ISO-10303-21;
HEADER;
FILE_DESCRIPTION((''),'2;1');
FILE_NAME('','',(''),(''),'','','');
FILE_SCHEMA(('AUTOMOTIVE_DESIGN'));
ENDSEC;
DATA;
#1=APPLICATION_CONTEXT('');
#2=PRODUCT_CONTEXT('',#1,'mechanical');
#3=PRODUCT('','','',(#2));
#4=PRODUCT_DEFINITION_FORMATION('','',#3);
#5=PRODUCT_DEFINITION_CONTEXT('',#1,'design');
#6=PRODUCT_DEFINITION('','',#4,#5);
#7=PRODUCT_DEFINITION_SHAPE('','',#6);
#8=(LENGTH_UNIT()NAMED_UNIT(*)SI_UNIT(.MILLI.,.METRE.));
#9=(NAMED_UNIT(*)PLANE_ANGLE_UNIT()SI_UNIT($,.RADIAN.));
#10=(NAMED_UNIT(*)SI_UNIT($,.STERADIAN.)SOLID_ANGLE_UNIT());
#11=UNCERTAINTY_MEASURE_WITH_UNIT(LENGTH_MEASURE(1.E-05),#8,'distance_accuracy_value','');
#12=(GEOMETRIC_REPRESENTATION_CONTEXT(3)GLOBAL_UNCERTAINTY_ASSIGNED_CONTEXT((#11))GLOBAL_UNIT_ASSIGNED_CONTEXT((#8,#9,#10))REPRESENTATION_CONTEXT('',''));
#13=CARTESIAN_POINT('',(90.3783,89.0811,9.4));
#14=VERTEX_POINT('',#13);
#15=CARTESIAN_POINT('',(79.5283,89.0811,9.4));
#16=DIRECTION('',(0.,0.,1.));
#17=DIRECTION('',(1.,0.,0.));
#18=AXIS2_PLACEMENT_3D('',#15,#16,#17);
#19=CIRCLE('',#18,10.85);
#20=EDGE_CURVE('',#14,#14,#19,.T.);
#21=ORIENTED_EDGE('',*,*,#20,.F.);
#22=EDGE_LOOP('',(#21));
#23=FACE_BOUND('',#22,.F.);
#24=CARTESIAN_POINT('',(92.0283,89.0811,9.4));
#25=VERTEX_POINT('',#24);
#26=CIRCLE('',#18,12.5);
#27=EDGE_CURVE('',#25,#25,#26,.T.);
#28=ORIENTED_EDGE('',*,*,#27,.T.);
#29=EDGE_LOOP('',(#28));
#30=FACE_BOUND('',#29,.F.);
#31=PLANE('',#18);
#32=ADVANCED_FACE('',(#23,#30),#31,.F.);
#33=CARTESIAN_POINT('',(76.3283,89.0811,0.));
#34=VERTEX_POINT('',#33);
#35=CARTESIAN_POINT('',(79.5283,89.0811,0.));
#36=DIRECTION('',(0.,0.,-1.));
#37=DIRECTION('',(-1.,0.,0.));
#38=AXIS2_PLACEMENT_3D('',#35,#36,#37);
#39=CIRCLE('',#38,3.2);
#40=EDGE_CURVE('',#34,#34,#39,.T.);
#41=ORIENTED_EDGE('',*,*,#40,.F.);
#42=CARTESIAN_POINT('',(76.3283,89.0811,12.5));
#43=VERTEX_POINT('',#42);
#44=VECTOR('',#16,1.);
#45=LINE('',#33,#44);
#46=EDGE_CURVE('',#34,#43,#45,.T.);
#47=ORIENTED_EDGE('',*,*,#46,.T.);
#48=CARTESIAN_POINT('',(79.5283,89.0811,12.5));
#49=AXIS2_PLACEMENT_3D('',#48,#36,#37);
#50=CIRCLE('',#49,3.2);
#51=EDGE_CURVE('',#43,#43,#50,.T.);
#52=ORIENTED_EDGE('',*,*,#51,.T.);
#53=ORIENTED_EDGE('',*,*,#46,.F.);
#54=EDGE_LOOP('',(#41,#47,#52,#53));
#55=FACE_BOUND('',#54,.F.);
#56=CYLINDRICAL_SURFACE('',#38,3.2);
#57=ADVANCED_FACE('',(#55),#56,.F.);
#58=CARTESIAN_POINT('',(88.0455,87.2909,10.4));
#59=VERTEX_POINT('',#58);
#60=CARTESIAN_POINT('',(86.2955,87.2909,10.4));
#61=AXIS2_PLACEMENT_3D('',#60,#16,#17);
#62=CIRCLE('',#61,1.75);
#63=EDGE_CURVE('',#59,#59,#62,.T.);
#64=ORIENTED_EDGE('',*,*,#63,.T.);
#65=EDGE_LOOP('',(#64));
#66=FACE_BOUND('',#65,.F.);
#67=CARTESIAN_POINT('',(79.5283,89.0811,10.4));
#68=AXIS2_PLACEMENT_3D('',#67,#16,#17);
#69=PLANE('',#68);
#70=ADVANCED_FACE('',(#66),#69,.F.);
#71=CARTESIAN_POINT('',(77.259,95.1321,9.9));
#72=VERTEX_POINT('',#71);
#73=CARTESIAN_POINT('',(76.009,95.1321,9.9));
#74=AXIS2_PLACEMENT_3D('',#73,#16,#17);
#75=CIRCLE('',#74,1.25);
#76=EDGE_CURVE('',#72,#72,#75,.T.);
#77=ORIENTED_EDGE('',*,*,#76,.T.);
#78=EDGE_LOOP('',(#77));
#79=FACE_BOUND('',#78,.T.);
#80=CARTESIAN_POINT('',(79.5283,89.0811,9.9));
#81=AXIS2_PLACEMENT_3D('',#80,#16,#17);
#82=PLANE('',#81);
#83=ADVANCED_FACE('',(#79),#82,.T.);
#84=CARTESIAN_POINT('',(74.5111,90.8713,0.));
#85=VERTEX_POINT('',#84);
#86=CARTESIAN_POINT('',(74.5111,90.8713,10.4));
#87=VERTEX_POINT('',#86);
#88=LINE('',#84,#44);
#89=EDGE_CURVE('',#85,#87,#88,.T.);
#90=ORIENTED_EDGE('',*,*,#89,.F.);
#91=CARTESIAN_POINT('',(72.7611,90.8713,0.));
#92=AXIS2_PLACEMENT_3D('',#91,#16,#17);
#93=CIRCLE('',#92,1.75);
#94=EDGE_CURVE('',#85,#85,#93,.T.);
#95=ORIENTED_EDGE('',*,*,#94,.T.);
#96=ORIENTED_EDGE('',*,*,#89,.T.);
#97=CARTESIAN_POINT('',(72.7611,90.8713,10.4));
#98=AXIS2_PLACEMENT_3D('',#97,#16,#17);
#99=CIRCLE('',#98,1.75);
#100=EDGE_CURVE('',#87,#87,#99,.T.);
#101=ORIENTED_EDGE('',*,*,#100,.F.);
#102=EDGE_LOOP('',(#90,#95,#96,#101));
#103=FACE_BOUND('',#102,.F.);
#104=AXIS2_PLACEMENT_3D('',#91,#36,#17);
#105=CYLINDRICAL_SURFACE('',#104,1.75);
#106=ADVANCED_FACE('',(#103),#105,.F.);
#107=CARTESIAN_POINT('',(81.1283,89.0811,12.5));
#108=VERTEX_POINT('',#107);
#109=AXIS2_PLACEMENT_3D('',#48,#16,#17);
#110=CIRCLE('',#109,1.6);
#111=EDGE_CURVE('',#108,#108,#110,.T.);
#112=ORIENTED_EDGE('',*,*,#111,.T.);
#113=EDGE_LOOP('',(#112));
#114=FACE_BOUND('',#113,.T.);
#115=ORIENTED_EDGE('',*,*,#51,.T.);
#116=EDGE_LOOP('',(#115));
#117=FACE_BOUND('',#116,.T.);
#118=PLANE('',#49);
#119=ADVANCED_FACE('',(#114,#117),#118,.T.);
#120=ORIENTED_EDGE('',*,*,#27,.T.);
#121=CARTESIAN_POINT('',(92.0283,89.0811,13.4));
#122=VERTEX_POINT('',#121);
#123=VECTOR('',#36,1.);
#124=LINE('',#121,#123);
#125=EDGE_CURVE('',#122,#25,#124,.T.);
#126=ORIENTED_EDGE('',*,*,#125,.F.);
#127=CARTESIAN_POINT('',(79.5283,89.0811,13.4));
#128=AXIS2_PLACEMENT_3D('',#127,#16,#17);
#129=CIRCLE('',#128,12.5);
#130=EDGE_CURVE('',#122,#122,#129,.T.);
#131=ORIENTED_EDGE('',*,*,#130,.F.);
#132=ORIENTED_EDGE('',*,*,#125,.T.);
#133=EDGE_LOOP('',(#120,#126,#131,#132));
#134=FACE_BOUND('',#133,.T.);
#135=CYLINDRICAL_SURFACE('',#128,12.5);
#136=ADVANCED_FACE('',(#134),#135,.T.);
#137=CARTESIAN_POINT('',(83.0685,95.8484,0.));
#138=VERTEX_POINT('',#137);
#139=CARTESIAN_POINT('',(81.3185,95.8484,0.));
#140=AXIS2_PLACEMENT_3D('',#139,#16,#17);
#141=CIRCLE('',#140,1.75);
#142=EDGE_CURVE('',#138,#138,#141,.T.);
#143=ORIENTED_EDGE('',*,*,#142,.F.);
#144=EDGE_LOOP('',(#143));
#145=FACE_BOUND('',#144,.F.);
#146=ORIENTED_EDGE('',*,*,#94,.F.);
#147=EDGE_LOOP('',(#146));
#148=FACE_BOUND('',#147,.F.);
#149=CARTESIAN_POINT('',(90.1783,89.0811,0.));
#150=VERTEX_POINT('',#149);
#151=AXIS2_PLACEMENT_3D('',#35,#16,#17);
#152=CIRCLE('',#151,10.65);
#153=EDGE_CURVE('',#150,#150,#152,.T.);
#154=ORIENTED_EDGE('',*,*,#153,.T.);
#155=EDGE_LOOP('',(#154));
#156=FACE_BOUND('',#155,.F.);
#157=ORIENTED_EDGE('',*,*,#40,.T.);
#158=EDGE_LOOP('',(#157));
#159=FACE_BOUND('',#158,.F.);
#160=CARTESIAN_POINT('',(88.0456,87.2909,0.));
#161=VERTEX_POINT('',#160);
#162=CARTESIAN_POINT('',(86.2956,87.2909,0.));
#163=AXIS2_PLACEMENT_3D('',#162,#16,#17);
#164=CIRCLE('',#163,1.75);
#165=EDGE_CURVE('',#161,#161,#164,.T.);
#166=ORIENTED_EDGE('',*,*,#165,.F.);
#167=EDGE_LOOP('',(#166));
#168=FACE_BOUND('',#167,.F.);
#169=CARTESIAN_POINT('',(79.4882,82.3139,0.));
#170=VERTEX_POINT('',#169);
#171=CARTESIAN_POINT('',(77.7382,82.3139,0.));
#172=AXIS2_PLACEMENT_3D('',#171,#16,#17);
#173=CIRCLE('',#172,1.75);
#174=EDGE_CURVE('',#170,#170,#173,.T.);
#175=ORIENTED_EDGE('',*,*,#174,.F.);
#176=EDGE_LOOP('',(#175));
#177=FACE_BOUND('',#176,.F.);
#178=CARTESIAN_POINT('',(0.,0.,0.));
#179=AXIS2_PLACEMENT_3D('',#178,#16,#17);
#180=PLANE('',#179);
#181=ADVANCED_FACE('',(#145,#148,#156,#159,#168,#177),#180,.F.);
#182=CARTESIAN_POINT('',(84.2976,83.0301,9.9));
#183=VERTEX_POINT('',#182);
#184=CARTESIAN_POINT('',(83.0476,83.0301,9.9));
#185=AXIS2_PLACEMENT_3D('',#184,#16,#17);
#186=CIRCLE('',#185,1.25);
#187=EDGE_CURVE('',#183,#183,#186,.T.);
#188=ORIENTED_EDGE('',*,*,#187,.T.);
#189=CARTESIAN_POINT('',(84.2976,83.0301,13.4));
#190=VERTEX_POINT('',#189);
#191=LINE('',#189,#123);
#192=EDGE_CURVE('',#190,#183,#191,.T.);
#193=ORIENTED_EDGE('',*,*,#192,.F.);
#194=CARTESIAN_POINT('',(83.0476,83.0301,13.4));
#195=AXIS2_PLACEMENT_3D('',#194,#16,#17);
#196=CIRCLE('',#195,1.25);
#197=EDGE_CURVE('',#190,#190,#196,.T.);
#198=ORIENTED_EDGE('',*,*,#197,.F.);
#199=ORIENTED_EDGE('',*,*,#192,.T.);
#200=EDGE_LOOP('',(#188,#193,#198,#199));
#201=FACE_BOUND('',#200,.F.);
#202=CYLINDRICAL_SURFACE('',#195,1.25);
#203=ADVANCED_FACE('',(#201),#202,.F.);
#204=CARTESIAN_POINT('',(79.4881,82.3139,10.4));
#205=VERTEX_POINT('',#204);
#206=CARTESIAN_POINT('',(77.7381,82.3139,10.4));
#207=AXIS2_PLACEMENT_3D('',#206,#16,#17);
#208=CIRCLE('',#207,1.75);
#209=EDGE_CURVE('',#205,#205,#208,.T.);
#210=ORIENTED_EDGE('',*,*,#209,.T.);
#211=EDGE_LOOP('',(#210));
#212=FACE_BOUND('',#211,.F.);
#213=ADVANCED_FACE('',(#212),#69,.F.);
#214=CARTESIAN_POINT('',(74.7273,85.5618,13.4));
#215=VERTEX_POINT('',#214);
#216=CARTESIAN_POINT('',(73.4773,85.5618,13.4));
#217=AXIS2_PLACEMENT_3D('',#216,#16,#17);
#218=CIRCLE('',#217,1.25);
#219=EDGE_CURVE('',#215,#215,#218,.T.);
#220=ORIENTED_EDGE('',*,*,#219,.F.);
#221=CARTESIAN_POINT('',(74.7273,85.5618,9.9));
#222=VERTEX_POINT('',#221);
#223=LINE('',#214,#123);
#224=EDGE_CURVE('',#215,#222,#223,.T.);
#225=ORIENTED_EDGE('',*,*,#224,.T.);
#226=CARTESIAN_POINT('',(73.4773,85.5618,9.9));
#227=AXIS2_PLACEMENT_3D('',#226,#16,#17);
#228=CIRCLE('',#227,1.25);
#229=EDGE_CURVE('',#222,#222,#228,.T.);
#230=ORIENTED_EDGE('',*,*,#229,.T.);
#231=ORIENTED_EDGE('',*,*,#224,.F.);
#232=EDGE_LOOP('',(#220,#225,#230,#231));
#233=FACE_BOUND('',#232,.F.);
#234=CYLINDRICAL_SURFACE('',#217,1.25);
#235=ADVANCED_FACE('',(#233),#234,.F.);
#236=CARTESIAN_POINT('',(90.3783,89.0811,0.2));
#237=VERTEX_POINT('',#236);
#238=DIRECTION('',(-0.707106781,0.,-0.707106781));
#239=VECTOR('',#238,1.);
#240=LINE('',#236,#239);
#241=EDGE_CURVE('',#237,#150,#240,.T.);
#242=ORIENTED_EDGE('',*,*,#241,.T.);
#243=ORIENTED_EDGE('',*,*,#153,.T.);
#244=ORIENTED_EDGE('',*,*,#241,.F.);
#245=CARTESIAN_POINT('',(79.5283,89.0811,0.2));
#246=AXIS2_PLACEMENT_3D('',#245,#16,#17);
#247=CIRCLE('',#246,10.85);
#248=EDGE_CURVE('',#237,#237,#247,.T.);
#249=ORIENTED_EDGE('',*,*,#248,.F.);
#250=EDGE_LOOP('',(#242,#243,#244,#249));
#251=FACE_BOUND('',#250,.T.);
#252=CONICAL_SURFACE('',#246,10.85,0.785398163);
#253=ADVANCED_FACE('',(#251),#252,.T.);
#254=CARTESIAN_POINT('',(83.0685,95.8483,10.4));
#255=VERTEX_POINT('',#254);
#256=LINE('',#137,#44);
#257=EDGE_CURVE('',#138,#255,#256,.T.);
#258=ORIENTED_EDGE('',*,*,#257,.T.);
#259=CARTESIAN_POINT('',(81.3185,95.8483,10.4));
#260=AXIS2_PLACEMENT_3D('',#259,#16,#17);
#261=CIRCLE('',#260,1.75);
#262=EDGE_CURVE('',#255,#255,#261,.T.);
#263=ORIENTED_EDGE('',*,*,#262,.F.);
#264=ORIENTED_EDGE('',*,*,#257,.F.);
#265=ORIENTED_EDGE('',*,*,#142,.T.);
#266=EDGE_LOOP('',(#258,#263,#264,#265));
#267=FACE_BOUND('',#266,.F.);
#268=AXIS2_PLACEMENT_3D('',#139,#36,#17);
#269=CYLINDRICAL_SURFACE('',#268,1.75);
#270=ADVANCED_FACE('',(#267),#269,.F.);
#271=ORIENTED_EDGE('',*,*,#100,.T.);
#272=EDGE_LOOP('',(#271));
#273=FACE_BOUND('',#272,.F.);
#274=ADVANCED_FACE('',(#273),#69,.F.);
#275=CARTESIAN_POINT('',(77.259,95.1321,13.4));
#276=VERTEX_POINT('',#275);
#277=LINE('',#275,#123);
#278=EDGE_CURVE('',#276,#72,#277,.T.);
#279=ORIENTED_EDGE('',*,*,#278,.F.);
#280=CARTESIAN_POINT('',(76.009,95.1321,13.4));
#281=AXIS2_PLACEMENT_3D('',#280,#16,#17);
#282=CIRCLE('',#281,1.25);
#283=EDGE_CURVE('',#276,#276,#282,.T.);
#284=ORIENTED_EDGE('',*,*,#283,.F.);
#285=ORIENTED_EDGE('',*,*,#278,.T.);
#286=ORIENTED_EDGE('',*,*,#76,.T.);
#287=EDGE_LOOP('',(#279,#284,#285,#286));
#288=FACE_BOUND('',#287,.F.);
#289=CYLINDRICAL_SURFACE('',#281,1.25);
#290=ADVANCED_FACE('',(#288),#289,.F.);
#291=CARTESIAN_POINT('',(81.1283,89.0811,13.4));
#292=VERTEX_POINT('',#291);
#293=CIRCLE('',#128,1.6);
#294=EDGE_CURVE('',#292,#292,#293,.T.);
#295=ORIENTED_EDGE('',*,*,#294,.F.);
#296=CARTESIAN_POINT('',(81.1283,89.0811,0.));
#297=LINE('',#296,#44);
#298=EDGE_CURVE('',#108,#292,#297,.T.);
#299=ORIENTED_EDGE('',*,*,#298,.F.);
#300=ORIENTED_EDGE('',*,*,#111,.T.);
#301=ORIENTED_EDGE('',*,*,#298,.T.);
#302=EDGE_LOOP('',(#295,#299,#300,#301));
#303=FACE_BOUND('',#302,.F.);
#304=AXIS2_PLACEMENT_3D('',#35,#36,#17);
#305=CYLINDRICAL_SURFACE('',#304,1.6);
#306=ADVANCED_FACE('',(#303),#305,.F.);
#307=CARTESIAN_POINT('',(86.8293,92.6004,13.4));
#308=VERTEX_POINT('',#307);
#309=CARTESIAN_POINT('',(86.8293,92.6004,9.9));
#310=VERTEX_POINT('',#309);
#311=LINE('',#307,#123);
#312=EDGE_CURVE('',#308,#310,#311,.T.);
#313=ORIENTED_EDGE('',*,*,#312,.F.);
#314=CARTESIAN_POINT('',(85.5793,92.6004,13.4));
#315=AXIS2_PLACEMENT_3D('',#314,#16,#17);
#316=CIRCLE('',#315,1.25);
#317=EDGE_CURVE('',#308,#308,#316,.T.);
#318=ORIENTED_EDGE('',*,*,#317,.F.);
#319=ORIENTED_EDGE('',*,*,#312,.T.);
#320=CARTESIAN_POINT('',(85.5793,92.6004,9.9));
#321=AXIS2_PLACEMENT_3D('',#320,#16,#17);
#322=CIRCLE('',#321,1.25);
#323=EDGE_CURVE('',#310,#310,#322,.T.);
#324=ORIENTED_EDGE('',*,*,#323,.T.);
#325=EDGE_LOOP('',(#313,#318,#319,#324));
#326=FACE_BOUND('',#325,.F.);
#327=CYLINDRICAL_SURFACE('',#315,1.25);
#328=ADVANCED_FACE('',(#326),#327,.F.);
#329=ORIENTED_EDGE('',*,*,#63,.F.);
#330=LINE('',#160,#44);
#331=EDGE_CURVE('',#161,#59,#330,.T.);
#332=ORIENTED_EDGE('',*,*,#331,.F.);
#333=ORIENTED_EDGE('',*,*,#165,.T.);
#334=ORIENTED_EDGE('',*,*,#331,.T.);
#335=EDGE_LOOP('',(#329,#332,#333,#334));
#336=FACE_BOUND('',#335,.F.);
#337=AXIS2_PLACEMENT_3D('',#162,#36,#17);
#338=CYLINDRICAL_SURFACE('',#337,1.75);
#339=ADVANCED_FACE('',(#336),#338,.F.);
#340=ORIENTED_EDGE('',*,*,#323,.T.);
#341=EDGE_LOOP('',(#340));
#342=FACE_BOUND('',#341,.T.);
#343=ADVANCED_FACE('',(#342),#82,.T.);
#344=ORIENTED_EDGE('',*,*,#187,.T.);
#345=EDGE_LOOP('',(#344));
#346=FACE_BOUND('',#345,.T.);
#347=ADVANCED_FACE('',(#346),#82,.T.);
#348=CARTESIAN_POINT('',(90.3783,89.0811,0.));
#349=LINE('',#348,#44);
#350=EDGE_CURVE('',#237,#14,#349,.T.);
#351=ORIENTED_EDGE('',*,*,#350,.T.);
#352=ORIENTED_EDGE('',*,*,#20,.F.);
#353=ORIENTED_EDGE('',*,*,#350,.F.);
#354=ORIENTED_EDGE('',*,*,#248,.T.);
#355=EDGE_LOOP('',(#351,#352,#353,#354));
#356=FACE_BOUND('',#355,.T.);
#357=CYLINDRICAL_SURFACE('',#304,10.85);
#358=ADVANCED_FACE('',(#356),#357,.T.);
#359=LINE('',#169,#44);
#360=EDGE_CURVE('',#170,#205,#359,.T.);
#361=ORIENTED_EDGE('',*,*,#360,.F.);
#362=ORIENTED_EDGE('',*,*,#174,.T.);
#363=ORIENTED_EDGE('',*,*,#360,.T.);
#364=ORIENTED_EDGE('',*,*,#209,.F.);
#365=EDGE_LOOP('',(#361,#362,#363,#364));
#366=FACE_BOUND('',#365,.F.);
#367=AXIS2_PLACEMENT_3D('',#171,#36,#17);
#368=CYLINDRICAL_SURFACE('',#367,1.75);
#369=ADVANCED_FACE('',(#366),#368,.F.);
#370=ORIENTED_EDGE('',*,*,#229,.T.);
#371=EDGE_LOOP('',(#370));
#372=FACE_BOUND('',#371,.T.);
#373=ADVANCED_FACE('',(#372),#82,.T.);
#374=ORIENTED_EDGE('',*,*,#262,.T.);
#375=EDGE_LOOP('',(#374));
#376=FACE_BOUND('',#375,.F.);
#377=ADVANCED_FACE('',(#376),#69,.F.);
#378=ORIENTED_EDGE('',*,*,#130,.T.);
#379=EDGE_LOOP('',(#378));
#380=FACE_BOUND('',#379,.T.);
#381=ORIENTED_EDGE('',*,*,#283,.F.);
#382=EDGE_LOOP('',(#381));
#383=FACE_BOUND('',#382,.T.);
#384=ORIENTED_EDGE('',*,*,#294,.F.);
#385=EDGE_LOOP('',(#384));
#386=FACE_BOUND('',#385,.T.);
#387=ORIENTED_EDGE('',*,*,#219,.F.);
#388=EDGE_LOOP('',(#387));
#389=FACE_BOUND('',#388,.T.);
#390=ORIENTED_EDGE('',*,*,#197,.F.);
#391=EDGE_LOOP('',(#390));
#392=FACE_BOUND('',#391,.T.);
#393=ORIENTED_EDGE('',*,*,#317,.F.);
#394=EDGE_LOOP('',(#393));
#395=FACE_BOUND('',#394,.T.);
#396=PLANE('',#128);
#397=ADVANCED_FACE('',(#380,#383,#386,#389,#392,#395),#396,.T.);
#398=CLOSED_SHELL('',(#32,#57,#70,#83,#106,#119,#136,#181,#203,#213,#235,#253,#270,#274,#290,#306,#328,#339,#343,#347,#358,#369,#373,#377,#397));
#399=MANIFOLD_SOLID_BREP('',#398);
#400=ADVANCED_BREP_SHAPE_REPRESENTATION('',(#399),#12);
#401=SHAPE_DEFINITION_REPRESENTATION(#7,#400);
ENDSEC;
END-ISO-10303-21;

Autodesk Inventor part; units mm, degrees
ref_plane "YZ Plane" through (0, 0, 0) normal (1, 0, 0) x (0, 1, 0)
ref_plane "XZ Plane" through (0, 0, 0) normal (0, 1, 0) x (-1, 0, 0)
ref_plane "XY Plane" through (0, 0, 0) normal (0, 0, 1) x (1, 0, 0)
sketch "스케치1" plane through (0, 0, 0) normal (0, 0, 1) x (1, 0, 0)
  circle A0 centre (77.7382, 82.3139) radius 1.75 projected
  circle A1 centre (72.7611, 90.8713) radius 1.75 projected
  circle A2 centre (86.2956, 87.2909) radius 1.75 projected
  circle A3 centre (81.3185, 95.8484) radius 1.75 projected
  circle A4 centre (79.5283, 89.0811) radius 11.15 projected
  circle A5 centre (79.5283, 89.0811) radius 10.85
  circle A6 centre (79.5283, 89.0811) radius 1.6
  circle A7 centre (79.5283, 89.0811) radius 2.8
  circle A8 centre (79.5283, 89.0811) radius 2.5 projected
  point P0 (0, 0)
  dimension "d0" = 0.3
  dimension "d3" = 3.2
extrude "돌출1" add sketch "스케치1" along normal blind 13.4 contours A5 | A7 | A8
sketch "스케치2" plane through (79.5283, 89.0811, 13.4) normal (0, 0, 1) x (1, 0, 0)
  circle A0 centre (0, 0) radius 10.85 projected
  circle A1 centre (0, 0) radius 12.5
  dimension "d4" = 25
extrude "돌출2" add sketch "스케치2" against normal blind 4
chamfer "모따기1" distance 0.2 angle 45 1 edges at (68.6783, 89.0811, 0)
sketch "스케치3" plane through (79.5283, 89.0811, 0) normal (0, 0, -1) x (-1, 0, 0)
  circle A0 centre (0, 0) radius 1.6 projected
  circle A1 centre (0, 0) radius 10.65 projected
  circle A2 centre (0, 0) radius 3.2
  dimension "d13" = 6.4
extrude "돌출3" cut sketch "스케치3" against normal blind 12.5 contours A2
sketch "스케치5" plane through (79.5283, 89.0811, 13.4) normal (0, 0, 1) x (1, 0, 0)
  circle A0 centre (0, 0) radius 12.5 projected
  circle A1 centre (-1.7902, -6.7672) radius 1.75 projected
  circle A2 centre (-1.7902, -6.7672) radius 1.25
  circle A3 centre (3.5193, -6.051) radius 1.25
  circle A4 centre (6.7672, -1.7902) radius 1.25
  circle A5 centre (6.051, 3.5193) radius 1.25
  circle A6 centre (1.7902, 6.7672) radius 1.25
  circle A7 centre (-3.5193, 6.051) radius 1.25
  circle A8 centre (-6.7672, 1.7902) radius 1.25
  circle A9 centre (-6.051, -3.5193) radius 1.25
  dimension "d18" = 2.5
  dimension "d21" = 360
extrude "돌출5" cut sketch "스케치5" against normal blind 3.5 contours A3 | A5 | A7 | A9
sketch "스케치4" plane through (79.5283, 89.0811, 13.4) normal (0, 0, 1) x (1, 0, 0)
  circle A0 centre (1.7902, 6.7672) radius 1.75 projected
  circle A1 centre (6.7672, -1.7902) radius 1.75 projected
  circle A2 centre (-6.7672, 1.7902) radius 1.75 projected
  circle A3 centre (-1.7902, -6.7672) radius 1.75 projected
extrude "돌출4" add sketch "스케치4" against normal blind 3
properties part number "SAFRS-P-0041"
